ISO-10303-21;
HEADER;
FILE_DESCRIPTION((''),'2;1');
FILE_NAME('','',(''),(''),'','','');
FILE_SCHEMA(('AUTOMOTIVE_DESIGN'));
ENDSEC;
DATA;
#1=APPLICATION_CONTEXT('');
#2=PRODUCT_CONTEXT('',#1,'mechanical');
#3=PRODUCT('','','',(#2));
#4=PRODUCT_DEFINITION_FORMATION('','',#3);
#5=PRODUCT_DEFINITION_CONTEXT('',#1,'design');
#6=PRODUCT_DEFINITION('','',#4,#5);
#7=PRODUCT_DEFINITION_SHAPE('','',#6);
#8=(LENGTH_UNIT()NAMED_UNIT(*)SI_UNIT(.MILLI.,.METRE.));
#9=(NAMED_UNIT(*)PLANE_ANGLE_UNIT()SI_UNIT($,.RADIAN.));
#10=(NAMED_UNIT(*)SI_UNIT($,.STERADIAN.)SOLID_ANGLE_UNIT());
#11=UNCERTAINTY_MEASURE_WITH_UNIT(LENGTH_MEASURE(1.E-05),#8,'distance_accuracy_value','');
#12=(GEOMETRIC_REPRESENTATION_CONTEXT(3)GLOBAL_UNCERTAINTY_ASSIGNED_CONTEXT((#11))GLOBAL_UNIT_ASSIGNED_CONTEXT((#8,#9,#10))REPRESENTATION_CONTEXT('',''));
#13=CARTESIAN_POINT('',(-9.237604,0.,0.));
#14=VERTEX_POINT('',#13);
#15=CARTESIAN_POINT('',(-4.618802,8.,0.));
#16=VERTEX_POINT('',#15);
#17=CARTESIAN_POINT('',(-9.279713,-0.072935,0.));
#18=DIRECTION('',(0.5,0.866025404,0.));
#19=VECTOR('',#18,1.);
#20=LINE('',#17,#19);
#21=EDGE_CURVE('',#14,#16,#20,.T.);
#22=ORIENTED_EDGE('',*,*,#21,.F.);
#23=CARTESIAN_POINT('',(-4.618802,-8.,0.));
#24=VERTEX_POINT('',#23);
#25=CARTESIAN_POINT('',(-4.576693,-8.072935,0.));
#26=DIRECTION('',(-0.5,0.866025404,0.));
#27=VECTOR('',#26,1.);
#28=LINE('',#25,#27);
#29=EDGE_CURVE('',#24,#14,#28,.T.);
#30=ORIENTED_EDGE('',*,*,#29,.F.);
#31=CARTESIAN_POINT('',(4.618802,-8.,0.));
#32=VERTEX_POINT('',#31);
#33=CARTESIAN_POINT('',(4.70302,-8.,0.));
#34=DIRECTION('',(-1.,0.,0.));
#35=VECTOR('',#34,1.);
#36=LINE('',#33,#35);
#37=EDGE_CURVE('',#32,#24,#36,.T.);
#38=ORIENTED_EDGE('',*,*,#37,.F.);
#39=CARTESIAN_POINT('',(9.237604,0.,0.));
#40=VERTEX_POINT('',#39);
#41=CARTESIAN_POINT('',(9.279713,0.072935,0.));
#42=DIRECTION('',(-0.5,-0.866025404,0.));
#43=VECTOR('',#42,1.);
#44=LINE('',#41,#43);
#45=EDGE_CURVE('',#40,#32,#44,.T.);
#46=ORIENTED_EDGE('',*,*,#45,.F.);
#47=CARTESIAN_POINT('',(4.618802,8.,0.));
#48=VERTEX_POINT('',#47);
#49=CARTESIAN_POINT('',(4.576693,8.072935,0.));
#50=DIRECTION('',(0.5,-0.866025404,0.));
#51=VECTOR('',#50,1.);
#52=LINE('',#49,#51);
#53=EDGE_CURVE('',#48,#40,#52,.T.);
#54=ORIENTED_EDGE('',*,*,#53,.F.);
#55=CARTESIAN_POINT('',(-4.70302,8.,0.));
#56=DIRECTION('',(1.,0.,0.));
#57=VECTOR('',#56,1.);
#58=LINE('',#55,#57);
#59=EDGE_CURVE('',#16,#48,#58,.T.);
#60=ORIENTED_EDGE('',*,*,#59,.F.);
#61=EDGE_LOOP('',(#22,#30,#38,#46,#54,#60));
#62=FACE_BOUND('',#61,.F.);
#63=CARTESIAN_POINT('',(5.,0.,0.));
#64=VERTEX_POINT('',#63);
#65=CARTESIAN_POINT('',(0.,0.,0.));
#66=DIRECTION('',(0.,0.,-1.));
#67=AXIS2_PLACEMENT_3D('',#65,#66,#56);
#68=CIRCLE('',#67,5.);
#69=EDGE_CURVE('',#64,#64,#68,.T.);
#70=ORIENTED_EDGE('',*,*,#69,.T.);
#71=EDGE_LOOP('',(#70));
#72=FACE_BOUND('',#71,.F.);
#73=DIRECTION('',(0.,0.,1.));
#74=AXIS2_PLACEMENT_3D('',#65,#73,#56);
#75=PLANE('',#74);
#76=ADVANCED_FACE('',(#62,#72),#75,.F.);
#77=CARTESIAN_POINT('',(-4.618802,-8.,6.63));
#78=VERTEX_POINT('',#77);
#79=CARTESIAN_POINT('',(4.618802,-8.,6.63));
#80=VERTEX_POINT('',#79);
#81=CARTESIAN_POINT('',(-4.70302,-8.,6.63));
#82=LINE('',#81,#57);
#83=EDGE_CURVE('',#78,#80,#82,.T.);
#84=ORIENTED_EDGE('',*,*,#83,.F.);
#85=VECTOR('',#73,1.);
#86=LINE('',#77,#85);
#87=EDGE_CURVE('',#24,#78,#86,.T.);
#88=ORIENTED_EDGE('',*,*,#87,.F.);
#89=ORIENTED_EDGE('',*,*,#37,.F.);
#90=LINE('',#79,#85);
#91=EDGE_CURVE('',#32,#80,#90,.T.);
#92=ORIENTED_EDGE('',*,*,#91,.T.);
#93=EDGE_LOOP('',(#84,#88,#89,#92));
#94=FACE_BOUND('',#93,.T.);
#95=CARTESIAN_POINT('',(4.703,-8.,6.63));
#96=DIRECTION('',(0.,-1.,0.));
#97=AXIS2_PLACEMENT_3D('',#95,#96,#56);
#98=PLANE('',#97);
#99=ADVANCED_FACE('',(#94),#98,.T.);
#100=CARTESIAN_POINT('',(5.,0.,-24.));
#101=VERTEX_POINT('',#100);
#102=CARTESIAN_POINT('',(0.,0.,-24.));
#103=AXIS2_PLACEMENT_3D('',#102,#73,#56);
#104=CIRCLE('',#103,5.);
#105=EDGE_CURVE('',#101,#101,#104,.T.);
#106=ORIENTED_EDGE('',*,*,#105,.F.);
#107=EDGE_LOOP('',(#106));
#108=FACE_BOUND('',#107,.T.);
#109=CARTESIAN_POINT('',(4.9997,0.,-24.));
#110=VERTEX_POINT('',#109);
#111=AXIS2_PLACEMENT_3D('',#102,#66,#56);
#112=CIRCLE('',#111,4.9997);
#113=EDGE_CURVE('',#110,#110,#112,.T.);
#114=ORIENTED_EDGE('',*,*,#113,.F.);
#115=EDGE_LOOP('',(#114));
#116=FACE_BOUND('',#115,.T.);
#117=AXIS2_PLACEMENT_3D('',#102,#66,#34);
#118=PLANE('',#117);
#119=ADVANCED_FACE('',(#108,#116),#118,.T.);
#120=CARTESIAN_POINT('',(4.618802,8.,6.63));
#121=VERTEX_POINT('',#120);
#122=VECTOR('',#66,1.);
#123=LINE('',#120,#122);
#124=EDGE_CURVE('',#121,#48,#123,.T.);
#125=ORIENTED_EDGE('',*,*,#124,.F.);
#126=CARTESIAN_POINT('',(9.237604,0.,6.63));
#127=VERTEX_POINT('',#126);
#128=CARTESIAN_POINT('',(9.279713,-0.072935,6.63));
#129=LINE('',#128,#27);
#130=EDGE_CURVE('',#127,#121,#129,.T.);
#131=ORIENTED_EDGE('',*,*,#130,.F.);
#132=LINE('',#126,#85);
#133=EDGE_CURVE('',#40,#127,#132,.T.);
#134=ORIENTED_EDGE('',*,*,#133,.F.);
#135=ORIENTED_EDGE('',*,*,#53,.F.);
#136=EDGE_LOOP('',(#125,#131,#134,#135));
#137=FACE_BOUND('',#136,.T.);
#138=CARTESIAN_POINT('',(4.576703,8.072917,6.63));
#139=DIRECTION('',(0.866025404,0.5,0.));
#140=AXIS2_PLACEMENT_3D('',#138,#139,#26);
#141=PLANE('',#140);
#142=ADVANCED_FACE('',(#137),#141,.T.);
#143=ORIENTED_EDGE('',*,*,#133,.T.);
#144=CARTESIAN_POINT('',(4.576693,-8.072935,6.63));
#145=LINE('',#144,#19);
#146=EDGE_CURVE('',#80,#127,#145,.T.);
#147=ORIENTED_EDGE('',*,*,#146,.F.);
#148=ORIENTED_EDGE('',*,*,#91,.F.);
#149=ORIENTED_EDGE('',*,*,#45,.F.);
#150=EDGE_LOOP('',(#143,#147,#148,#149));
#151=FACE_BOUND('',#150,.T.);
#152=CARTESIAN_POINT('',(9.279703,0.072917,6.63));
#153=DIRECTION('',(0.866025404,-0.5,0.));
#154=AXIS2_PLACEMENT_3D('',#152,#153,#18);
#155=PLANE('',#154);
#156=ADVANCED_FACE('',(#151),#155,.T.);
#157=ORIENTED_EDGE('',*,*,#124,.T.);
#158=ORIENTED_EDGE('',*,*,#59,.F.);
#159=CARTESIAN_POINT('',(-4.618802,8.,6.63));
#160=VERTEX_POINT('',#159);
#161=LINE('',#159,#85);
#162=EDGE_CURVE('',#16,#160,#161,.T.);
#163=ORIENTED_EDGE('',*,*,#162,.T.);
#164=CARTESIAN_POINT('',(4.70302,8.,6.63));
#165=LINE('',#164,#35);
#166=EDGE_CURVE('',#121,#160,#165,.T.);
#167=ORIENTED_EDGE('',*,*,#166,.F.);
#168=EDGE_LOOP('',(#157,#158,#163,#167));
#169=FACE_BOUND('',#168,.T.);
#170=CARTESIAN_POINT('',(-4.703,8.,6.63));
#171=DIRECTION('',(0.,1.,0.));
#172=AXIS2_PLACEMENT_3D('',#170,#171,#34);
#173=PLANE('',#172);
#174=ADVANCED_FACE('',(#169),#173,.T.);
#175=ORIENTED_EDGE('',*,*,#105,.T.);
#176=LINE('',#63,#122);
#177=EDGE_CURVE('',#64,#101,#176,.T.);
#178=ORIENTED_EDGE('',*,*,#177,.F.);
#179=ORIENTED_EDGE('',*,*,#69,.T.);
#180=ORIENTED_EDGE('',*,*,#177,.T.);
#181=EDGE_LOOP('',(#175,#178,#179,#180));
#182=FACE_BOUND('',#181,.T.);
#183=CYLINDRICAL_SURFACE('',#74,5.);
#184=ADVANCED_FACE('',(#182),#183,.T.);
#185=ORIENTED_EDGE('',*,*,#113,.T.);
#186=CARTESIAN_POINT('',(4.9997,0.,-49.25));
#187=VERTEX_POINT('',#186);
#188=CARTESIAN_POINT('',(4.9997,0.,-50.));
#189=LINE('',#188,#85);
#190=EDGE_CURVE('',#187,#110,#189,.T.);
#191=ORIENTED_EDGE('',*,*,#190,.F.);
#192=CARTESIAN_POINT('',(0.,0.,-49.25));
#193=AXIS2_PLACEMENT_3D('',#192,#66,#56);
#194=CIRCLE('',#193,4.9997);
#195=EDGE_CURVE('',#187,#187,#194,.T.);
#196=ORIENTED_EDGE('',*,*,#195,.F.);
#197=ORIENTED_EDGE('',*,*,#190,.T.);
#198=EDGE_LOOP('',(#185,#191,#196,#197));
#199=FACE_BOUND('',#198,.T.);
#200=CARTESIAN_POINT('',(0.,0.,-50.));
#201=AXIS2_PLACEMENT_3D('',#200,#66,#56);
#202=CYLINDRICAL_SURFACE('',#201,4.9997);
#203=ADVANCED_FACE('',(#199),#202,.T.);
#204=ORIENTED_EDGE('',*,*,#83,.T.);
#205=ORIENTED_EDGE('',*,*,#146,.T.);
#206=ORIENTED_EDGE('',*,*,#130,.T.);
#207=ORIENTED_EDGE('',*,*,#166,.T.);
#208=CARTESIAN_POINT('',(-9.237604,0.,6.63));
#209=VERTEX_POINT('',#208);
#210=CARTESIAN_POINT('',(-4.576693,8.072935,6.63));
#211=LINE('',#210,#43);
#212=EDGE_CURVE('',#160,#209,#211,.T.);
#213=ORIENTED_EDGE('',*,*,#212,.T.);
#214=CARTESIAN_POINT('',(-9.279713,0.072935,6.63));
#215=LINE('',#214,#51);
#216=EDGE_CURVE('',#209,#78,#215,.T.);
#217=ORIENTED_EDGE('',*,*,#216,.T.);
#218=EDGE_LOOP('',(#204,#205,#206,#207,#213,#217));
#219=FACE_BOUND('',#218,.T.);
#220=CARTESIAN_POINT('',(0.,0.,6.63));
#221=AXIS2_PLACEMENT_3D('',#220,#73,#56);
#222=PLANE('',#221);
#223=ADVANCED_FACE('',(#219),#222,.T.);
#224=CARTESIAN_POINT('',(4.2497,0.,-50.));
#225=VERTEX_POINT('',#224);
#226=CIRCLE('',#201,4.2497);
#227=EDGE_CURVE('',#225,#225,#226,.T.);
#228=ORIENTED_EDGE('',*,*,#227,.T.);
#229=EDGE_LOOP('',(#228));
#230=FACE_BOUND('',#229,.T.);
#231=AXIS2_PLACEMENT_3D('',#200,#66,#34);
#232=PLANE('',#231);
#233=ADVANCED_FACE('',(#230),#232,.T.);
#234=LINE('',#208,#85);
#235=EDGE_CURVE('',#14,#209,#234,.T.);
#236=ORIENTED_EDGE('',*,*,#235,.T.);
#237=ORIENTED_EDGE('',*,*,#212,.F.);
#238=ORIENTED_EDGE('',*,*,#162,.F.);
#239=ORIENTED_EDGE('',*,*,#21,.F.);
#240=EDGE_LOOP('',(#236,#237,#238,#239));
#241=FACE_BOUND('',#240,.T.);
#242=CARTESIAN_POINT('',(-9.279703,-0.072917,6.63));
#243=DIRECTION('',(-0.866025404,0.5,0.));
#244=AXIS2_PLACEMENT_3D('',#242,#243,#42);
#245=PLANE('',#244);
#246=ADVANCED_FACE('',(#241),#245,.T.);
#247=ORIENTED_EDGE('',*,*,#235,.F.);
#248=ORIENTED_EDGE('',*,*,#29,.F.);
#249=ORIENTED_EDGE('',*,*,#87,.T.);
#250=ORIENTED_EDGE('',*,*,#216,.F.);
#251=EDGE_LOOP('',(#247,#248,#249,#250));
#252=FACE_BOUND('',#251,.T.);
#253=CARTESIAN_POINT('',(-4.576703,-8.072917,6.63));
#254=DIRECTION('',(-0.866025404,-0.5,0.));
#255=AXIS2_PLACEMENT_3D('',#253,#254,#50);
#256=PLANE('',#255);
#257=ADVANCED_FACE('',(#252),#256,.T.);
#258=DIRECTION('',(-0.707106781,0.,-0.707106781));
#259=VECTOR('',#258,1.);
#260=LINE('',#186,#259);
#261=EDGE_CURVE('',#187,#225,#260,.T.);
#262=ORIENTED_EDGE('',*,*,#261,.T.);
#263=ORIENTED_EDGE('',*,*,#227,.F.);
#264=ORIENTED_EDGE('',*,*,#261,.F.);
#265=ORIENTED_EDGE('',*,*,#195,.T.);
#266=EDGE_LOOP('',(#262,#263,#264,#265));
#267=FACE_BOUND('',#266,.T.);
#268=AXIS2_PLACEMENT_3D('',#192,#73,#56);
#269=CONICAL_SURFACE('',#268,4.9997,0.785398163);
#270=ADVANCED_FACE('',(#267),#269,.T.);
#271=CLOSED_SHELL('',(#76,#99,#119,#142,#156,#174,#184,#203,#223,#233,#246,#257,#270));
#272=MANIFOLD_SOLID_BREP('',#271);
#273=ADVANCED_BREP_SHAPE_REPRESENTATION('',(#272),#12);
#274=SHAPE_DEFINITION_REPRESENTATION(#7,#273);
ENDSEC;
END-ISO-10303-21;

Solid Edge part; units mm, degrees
sketch "Sketch1" plane through (0, 0, 0) normal (0, 0, 1) x (1, 0, 0)
  circle A0 centre (0, 0) radius 9.28
  dimension "D1" = 18.56
extrude "Protrusion1" add sketch "Sketch1" along normal blind 6.63
sketch "Sketch2" plane through (0, 0, 0) normal (0, 0, -1) x (1, 0, 0)
  circle A0 centre (0, 0) radius 5
extrude "Protrusion2" add sketch "Sketch2" along normal blind 50
sketch "Sketch3" plane through (0, 0, -50) normal (0, 0, -1) x (1, 0, 0)
  circle A0 centre (0, 0) radius 4.9997
extrude "Cutout1" cut sketch "Sketch3" against normal blind 26 flip side to cut
chamfer "Chamfer_1" distance 0.75 angle 45 1 edges at (-4.9997, 0, -50)
sketch "Sketch4" plane through (0, 0, 6.63) normal (0, 0, 1) x (1, 0, 0)
  line L0 (-4.703, 8) -> (4.703, 8)
  dimension "D1" = 16
extrude "Cutout2" cut sketch "Sketch4" against normal up to next material side at (0, 8.05, 6.63)
pattern_circular "Pattern1" count 6 over 360 about axis through (0, 0, 6.63) along (0, 0, 1) of "Cutout2"
properties part number "24101234"
